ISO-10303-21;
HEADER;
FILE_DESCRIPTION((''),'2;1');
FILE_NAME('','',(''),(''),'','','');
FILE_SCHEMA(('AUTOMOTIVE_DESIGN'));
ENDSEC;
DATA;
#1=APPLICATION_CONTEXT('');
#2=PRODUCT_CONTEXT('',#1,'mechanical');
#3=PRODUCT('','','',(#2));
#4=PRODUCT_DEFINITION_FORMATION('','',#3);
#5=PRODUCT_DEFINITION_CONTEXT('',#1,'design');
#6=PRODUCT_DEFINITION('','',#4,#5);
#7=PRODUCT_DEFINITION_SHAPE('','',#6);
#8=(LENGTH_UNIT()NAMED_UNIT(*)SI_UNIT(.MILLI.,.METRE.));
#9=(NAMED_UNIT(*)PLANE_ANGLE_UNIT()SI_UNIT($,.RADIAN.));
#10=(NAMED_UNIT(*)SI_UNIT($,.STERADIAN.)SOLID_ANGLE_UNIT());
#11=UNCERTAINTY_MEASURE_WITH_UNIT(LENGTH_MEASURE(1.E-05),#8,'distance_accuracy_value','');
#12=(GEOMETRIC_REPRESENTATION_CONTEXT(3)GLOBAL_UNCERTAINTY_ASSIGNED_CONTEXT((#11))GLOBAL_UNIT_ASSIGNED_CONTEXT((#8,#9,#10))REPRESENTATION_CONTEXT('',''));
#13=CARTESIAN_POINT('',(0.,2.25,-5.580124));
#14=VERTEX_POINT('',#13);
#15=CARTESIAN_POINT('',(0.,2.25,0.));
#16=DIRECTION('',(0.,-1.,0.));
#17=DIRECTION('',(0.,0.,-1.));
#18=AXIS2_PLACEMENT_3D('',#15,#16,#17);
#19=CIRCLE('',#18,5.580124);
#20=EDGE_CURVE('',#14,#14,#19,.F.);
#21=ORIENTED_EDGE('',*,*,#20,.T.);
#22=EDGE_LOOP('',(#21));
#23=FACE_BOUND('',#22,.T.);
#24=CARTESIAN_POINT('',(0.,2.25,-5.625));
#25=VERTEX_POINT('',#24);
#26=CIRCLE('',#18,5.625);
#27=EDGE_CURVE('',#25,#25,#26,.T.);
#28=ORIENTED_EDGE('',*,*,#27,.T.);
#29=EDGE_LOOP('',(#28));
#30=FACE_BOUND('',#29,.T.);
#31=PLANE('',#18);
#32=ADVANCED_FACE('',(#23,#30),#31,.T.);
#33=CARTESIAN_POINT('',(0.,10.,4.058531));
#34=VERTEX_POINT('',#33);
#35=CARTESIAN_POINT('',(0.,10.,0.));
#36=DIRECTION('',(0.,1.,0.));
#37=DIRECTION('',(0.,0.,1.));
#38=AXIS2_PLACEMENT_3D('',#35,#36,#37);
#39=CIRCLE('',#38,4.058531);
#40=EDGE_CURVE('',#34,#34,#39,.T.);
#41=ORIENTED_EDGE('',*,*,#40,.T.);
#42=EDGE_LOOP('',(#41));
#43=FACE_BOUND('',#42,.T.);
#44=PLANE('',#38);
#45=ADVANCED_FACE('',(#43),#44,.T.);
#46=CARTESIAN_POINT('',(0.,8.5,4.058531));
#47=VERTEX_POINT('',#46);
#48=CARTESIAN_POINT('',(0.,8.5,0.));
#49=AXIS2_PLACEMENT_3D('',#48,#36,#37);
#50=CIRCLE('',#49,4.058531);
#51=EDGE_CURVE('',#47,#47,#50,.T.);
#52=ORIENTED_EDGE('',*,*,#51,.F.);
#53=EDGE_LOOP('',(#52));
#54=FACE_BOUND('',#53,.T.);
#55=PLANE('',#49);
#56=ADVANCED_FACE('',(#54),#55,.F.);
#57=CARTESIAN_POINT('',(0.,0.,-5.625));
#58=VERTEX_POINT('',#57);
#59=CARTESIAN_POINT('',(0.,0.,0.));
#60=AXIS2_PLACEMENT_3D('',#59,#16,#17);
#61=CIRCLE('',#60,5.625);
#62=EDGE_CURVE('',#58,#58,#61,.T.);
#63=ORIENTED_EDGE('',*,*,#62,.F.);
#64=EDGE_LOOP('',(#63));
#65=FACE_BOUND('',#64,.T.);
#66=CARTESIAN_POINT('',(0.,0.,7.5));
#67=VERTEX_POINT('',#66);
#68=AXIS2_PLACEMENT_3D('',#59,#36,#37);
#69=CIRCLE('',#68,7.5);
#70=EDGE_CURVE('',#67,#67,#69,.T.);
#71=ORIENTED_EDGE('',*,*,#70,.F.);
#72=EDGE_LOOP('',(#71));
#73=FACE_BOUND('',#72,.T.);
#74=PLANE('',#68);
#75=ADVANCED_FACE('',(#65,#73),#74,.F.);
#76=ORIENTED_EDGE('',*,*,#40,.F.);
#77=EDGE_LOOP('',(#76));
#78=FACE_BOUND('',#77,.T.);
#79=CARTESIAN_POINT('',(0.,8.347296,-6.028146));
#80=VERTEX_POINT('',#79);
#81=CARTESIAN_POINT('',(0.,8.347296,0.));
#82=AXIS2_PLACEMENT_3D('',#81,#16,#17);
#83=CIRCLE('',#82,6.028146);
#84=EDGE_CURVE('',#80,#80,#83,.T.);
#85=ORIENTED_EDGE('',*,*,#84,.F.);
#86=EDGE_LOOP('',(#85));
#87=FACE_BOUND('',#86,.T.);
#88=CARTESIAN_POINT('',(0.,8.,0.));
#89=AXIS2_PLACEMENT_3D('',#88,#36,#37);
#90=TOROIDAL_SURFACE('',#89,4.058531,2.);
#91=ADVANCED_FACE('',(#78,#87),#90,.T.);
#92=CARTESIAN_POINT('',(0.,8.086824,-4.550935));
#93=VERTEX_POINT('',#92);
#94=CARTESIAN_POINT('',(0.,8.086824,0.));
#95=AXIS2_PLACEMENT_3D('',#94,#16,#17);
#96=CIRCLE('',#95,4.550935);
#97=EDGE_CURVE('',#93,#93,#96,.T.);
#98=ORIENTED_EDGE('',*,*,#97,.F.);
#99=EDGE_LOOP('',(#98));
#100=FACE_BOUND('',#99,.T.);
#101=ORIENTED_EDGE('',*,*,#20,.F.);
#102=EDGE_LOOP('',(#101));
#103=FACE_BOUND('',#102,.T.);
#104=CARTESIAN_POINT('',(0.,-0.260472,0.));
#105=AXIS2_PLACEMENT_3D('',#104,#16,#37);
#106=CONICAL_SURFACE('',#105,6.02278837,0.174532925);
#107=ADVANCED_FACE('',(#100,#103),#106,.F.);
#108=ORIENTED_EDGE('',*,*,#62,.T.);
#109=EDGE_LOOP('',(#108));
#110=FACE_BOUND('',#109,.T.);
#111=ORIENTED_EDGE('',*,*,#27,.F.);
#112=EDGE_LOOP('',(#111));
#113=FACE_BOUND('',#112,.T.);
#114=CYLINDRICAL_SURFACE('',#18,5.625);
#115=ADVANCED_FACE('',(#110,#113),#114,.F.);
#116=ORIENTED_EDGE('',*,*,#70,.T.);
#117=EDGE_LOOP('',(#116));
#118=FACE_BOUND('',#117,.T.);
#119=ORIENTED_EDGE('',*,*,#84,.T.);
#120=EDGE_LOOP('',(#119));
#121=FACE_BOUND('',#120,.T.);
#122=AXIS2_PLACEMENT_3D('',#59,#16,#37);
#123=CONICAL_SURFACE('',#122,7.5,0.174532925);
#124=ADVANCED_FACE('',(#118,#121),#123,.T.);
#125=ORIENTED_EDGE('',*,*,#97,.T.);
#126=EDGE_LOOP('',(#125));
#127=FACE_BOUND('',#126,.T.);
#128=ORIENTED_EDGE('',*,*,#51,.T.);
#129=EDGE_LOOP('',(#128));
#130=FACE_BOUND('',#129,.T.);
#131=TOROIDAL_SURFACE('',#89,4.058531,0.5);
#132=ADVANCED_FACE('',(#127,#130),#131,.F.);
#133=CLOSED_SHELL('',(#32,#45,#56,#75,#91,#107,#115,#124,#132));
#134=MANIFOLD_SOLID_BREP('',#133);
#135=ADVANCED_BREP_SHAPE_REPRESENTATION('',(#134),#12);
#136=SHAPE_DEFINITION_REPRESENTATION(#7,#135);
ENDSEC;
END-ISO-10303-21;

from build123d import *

# Parameters (mm, degrees)
SKETCH1_R           = 7.5
BOSS_EXTRUDE1_DEPTH = 10
BOSS_EXTRUDE1_TAPER = 10
SKETCH2_R           = 5.625
CUT_EXTRUDE1_DEPTH  = 2.25
FILLET1_R           = 2


# Read off the part's stored shape, not the designer's step: Shell2
with BuildPart() as part:
    # Sketch1 → Boss-Extrude1 (new body)
    with BuildSketch(Plane(origin=(0, 0, 0), x_dir=(1, 0, 0), z_dir=(0, 1, 0))):
        Circle(SKETCH1_R)
    extrude(amount=BOSS_EXTRUDE1_DEPTH, taper=BOSS_EXTRUDE1_TAPER)

    # Sketch2 → Cut-Extrude1 (cut)
    with BuildSketch(Plane.XZ):
        with Locations(Location((0, 0, 0), (0, 0, 270))):
            Circle(SKETCH2_R)
    extrude(amount=-CUT_EXTRUDE1_DEPTH, mode=Mode.SUBTRACT)

    # Fillet1
    fillet1_edges = [part.edges().sort_by_distance(p)[0] for p in [
        (-5.736730193, 10, 0),
    ]]
    fillet(fillet1_edges, radius=FILLET1_R)

    # Shell2 outline → Shell2 (revolve, cut)
    with BuildSketch(Plane.XY):
        with BuildLine():
            Line((5.580124376, 2.25), (4.550934807, 8.086824089))
            ThreePointArc((4.550934807, 8.086824089), (4.379924736, 8.383022222), (4.058530931, 8.5))
            Line((4.058530931, 8.5), (0, 8.5))
            Line((0, 8.5), (0, 2.25))
            Line((0, 2.25), (5.580124376, 2.25))
        make_face()
    revolve(axis=Axis((0, 0, 0), (0, 1, 0)), mode=Mode.SUBTRACT)


solid = part.part
